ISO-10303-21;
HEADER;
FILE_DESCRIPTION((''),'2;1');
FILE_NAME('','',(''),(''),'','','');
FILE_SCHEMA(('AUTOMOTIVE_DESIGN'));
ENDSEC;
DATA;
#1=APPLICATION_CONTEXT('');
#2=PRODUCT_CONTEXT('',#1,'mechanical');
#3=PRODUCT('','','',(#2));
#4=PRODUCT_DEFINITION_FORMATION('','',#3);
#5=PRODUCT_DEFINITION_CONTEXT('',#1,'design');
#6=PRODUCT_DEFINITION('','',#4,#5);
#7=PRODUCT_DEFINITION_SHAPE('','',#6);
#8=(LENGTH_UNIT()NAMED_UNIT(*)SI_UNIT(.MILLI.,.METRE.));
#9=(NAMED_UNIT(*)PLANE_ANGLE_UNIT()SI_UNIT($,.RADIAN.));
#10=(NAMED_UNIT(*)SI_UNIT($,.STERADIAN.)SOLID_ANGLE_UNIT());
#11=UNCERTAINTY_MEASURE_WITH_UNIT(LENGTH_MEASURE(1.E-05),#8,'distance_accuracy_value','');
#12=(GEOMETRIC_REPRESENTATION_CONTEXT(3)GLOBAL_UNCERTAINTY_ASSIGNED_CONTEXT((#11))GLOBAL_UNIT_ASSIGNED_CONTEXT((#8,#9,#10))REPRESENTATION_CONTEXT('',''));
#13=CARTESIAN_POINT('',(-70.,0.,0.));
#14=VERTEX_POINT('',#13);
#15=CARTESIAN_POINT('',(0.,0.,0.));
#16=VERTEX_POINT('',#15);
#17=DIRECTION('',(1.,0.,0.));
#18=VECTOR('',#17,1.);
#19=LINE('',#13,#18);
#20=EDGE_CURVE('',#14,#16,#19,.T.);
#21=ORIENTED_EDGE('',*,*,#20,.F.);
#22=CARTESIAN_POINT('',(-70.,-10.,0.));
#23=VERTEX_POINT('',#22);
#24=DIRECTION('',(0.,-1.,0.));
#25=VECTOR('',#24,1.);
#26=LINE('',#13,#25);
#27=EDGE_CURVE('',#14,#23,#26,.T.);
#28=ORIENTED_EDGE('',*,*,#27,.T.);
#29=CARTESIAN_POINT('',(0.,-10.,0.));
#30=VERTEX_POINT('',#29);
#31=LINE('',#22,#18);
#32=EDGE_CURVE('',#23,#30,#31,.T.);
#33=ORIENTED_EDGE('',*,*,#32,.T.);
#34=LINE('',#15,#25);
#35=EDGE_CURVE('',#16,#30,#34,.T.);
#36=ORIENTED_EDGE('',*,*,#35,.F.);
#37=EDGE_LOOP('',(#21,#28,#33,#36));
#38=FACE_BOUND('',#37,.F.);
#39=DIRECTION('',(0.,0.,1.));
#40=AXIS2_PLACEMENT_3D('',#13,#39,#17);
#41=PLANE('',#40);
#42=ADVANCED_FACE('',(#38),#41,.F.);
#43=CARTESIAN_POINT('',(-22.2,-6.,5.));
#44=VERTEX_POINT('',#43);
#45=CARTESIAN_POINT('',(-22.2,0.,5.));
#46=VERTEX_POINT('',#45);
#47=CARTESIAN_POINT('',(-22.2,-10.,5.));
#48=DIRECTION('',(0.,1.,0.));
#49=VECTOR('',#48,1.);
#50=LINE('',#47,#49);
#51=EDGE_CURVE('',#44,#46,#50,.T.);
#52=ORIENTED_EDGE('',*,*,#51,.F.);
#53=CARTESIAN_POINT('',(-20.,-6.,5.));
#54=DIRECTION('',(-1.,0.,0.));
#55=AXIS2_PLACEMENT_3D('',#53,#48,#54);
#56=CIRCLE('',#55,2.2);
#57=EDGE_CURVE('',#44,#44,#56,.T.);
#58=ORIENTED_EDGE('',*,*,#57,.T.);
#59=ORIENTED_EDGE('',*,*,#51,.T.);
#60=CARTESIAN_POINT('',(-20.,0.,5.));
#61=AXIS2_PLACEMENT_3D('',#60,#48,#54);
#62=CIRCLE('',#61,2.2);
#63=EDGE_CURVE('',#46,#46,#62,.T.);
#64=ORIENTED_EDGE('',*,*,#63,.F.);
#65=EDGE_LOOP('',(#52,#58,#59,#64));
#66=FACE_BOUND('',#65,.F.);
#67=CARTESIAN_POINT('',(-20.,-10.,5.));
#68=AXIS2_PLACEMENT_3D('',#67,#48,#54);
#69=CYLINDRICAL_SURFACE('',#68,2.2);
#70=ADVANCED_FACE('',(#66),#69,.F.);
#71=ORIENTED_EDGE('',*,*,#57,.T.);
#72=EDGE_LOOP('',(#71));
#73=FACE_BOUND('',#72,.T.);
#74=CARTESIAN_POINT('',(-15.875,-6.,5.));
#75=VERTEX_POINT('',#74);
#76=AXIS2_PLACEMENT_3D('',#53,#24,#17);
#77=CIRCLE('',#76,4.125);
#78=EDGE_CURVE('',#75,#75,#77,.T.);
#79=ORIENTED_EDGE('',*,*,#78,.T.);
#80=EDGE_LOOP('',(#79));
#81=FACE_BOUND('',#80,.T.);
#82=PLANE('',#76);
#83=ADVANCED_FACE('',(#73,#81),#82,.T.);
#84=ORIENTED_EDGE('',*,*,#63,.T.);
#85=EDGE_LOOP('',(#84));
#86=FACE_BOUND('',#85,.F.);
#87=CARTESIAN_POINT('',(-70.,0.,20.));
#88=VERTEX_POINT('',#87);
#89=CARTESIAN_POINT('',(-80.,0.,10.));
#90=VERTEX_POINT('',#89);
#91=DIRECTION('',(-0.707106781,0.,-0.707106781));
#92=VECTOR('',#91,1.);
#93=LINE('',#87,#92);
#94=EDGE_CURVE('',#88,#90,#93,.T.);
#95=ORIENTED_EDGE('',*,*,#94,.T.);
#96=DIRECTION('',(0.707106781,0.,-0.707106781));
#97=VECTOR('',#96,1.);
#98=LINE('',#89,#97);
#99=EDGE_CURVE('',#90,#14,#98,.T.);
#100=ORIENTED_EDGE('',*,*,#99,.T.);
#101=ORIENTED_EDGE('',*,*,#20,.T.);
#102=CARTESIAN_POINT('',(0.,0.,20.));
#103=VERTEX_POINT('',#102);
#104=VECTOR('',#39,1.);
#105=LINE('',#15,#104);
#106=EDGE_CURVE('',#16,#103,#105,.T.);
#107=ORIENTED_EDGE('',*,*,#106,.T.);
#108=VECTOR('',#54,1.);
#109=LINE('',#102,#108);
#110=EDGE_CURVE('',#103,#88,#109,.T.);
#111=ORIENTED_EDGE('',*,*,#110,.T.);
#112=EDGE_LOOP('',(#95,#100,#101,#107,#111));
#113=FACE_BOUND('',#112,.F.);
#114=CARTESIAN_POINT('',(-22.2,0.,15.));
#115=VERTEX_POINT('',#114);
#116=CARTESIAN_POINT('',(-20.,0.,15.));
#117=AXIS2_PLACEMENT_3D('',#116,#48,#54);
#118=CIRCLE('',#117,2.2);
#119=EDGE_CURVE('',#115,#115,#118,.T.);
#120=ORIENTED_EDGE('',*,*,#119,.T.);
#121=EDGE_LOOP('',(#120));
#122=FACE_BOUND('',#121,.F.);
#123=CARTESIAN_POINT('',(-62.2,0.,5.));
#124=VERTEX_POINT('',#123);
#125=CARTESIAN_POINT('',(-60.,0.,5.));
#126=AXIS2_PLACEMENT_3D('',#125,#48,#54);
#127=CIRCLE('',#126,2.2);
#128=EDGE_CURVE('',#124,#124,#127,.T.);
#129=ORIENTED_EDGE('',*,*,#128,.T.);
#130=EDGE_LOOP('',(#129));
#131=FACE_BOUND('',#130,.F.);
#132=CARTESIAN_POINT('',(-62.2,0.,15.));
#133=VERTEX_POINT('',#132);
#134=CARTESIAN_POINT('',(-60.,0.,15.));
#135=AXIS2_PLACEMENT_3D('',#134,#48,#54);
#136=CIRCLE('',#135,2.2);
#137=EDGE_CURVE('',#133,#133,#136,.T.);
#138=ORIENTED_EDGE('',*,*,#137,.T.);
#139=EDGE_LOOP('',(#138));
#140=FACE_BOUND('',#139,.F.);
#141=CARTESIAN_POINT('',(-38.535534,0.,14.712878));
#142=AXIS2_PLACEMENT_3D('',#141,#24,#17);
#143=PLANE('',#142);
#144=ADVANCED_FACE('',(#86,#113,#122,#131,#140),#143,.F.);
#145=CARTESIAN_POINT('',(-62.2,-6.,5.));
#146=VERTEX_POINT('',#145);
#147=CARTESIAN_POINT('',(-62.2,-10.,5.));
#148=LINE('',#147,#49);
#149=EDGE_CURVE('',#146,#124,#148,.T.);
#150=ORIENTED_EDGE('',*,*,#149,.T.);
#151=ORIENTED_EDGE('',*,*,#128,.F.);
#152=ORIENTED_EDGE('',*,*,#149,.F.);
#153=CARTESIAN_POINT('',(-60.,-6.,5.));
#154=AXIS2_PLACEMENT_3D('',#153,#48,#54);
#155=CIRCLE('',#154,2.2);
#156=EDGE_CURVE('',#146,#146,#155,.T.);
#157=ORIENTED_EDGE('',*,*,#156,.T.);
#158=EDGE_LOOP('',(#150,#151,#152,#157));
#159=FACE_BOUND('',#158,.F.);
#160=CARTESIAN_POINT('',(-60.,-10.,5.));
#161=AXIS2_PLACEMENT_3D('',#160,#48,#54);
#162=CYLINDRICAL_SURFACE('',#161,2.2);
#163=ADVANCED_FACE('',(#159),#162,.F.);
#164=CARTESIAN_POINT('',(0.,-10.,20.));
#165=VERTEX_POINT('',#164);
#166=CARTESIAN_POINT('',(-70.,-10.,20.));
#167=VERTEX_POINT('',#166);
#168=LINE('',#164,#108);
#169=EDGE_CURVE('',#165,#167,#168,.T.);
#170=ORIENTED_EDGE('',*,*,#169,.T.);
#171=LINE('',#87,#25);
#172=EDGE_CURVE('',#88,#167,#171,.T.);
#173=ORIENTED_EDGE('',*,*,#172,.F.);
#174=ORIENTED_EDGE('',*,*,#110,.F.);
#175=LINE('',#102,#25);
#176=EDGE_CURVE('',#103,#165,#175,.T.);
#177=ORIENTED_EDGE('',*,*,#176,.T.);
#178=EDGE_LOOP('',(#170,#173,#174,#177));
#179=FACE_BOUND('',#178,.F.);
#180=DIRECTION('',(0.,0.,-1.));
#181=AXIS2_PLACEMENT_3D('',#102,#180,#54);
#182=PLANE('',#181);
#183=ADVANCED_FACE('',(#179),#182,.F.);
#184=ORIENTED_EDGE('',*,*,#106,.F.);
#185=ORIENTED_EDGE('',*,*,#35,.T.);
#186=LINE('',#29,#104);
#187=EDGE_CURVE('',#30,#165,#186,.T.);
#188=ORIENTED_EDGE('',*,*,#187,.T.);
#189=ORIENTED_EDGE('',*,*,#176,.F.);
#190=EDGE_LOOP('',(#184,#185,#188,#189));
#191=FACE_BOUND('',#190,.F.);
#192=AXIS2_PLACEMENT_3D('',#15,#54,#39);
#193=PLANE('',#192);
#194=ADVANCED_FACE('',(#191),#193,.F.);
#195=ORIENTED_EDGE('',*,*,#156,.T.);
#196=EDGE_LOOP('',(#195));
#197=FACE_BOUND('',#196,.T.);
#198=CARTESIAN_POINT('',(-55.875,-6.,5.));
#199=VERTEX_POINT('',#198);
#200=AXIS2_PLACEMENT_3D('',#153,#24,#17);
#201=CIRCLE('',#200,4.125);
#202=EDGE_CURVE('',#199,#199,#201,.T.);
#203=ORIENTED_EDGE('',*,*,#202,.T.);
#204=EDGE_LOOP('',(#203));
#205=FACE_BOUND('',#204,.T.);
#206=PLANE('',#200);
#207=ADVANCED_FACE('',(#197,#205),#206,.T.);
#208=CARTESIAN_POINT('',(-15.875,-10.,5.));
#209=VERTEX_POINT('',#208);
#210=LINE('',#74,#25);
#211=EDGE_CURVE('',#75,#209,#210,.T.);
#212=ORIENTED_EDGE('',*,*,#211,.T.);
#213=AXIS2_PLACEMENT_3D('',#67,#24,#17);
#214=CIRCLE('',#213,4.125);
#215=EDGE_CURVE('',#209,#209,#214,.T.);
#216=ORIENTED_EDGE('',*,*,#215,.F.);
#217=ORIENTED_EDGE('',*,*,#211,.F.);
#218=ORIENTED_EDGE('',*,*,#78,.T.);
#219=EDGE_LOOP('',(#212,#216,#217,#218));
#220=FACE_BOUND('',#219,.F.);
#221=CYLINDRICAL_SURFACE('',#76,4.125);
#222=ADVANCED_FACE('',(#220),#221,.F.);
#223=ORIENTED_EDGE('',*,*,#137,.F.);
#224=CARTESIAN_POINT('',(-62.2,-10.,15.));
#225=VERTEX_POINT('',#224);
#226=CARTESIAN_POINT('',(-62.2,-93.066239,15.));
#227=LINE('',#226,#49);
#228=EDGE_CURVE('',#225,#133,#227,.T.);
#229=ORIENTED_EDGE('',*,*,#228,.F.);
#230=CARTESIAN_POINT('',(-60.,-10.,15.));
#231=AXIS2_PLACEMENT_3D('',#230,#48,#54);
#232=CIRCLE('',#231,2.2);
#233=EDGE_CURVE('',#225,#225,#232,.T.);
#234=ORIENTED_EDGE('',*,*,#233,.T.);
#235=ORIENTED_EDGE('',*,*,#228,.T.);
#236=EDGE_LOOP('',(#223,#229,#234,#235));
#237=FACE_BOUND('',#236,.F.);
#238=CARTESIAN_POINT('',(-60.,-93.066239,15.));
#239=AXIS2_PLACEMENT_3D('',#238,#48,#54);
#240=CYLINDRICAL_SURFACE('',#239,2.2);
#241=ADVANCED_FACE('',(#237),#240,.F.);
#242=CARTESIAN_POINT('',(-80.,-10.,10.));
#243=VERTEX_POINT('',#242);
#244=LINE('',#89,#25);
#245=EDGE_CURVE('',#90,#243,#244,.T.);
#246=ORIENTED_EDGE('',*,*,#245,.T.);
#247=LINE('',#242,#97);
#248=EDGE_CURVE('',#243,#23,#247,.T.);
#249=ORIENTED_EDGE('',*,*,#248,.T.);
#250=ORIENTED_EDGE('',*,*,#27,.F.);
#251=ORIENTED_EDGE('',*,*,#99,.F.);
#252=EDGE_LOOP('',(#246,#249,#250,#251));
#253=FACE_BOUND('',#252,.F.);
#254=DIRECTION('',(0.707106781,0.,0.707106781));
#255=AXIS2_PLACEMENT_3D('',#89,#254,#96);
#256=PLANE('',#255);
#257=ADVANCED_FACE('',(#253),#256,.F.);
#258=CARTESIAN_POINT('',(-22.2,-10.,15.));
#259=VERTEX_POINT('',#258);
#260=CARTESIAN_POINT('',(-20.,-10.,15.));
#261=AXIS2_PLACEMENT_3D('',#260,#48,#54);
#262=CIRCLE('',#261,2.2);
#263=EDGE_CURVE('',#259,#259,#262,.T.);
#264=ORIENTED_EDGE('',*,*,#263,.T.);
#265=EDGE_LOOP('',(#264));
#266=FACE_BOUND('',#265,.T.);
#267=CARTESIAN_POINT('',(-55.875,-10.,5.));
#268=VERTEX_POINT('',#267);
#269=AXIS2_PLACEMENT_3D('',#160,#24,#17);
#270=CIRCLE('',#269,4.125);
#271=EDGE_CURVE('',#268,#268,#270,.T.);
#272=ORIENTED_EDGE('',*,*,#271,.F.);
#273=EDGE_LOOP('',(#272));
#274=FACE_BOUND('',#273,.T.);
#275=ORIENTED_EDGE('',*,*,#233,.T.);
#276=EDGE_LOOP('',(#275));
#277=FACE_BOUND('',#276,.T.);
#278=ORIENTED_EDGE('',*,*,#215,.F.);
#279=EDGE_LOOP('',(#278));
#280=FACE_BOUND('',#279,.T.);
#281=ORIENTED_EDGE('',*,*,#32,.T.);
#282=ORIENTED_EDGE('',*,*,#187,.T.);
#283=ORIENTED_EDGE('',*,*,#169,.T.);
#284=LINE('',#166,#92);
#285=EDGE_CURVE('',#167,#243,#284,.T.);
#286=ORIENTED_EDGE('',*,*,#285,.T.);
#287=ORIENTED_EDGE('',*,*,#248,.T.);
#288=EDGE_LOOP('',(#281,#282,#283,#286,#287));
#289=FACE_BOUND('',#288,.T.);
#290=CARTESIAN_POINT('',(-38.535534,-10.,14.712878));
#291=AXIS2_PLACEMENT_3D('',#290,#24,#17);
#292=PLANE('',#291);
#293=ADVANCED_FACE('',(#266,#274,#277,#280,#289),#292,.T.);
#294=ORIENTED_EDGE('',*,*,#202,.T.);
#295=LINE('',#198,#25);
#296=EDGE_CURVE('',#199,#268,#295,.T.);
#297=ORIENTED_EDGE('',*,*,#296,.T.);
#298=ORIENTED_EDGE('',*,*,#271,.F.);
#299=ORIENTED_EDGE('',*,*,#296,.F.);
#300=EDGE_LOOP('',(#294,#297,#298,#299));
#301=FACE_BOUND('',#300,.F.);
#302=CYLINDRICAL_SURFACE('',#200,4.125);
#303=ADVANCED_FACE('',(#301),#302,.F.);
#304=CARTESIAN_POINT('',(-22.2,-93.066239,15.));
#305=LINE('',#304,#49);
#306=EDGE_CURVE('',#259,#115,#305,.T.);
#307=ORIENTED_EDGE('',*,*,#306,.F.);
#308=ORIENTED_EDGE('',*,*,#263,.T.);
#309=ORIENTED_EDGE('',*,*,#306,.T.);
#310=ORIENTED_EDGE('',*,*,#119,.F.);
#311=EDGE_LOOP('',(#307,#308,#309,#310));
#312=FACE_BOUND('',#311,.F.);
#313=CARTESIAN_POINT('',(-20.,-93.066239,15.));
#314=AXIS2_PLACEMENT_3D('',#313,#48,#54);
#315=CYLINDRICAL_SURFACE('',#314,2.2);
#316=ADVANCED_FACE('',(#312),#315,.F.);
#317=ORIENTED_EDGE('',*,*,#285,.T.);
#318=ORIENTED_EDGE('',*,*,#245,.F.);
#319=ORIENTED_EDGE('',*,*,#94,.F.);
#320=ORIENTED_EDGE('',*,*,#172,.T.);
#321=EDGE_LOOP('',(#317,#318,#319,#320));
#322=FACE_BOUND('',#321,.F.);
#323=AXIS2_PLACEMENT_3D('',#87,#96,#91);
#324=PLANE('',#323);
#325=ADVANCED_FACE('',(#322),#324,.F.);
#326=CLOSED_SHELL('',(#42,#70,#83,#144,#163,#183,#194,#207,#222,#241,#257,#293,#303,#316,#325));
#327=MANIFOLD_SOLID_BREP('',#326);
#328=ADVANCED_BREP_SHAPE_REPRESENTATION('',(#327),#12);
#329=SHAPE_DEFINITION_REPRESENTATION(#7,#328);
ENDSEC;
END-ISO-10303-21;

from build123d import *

# Parameters (mm, degrees)
F1_DEPTH       = 10
F3_D           = 4.4
F3_CBORE_D     = 8.25
F3_CBORE_DEPTH = 4
F5_D           = 4.4


# Not quite as in the source:
# - a feature names something its author has since deleted; it is built from what else it names


with BuildPart() as f1:
    # F0 (on Front) → F1 (new body)
    with BuildSketch(Plane.XZ):
        Polygon((-80, 10), (0, 10), (0, 20), (-70, 20), align=None)
        Polygon((-70, 0), (0, 0), (0, 10), (-80, 10), align=None)
    extrude(amount=F1_DEPTH)

    # F3 (through all)
    with Locations(Plane.XZ.offset(10)):
        with Locations((-20, 5), (-60, 5)):
            CounterBoreHole(F3_D / 2, F3_CBORE_D / 2, F3_CBORE_DEPTH)

    # F5 (through all)
    with Locations(Plane.XZ.offset(10)):
        with Locations((-60, 15), (-20, 15)):
            Hole(F5_D / 2)


solid = f1.part
